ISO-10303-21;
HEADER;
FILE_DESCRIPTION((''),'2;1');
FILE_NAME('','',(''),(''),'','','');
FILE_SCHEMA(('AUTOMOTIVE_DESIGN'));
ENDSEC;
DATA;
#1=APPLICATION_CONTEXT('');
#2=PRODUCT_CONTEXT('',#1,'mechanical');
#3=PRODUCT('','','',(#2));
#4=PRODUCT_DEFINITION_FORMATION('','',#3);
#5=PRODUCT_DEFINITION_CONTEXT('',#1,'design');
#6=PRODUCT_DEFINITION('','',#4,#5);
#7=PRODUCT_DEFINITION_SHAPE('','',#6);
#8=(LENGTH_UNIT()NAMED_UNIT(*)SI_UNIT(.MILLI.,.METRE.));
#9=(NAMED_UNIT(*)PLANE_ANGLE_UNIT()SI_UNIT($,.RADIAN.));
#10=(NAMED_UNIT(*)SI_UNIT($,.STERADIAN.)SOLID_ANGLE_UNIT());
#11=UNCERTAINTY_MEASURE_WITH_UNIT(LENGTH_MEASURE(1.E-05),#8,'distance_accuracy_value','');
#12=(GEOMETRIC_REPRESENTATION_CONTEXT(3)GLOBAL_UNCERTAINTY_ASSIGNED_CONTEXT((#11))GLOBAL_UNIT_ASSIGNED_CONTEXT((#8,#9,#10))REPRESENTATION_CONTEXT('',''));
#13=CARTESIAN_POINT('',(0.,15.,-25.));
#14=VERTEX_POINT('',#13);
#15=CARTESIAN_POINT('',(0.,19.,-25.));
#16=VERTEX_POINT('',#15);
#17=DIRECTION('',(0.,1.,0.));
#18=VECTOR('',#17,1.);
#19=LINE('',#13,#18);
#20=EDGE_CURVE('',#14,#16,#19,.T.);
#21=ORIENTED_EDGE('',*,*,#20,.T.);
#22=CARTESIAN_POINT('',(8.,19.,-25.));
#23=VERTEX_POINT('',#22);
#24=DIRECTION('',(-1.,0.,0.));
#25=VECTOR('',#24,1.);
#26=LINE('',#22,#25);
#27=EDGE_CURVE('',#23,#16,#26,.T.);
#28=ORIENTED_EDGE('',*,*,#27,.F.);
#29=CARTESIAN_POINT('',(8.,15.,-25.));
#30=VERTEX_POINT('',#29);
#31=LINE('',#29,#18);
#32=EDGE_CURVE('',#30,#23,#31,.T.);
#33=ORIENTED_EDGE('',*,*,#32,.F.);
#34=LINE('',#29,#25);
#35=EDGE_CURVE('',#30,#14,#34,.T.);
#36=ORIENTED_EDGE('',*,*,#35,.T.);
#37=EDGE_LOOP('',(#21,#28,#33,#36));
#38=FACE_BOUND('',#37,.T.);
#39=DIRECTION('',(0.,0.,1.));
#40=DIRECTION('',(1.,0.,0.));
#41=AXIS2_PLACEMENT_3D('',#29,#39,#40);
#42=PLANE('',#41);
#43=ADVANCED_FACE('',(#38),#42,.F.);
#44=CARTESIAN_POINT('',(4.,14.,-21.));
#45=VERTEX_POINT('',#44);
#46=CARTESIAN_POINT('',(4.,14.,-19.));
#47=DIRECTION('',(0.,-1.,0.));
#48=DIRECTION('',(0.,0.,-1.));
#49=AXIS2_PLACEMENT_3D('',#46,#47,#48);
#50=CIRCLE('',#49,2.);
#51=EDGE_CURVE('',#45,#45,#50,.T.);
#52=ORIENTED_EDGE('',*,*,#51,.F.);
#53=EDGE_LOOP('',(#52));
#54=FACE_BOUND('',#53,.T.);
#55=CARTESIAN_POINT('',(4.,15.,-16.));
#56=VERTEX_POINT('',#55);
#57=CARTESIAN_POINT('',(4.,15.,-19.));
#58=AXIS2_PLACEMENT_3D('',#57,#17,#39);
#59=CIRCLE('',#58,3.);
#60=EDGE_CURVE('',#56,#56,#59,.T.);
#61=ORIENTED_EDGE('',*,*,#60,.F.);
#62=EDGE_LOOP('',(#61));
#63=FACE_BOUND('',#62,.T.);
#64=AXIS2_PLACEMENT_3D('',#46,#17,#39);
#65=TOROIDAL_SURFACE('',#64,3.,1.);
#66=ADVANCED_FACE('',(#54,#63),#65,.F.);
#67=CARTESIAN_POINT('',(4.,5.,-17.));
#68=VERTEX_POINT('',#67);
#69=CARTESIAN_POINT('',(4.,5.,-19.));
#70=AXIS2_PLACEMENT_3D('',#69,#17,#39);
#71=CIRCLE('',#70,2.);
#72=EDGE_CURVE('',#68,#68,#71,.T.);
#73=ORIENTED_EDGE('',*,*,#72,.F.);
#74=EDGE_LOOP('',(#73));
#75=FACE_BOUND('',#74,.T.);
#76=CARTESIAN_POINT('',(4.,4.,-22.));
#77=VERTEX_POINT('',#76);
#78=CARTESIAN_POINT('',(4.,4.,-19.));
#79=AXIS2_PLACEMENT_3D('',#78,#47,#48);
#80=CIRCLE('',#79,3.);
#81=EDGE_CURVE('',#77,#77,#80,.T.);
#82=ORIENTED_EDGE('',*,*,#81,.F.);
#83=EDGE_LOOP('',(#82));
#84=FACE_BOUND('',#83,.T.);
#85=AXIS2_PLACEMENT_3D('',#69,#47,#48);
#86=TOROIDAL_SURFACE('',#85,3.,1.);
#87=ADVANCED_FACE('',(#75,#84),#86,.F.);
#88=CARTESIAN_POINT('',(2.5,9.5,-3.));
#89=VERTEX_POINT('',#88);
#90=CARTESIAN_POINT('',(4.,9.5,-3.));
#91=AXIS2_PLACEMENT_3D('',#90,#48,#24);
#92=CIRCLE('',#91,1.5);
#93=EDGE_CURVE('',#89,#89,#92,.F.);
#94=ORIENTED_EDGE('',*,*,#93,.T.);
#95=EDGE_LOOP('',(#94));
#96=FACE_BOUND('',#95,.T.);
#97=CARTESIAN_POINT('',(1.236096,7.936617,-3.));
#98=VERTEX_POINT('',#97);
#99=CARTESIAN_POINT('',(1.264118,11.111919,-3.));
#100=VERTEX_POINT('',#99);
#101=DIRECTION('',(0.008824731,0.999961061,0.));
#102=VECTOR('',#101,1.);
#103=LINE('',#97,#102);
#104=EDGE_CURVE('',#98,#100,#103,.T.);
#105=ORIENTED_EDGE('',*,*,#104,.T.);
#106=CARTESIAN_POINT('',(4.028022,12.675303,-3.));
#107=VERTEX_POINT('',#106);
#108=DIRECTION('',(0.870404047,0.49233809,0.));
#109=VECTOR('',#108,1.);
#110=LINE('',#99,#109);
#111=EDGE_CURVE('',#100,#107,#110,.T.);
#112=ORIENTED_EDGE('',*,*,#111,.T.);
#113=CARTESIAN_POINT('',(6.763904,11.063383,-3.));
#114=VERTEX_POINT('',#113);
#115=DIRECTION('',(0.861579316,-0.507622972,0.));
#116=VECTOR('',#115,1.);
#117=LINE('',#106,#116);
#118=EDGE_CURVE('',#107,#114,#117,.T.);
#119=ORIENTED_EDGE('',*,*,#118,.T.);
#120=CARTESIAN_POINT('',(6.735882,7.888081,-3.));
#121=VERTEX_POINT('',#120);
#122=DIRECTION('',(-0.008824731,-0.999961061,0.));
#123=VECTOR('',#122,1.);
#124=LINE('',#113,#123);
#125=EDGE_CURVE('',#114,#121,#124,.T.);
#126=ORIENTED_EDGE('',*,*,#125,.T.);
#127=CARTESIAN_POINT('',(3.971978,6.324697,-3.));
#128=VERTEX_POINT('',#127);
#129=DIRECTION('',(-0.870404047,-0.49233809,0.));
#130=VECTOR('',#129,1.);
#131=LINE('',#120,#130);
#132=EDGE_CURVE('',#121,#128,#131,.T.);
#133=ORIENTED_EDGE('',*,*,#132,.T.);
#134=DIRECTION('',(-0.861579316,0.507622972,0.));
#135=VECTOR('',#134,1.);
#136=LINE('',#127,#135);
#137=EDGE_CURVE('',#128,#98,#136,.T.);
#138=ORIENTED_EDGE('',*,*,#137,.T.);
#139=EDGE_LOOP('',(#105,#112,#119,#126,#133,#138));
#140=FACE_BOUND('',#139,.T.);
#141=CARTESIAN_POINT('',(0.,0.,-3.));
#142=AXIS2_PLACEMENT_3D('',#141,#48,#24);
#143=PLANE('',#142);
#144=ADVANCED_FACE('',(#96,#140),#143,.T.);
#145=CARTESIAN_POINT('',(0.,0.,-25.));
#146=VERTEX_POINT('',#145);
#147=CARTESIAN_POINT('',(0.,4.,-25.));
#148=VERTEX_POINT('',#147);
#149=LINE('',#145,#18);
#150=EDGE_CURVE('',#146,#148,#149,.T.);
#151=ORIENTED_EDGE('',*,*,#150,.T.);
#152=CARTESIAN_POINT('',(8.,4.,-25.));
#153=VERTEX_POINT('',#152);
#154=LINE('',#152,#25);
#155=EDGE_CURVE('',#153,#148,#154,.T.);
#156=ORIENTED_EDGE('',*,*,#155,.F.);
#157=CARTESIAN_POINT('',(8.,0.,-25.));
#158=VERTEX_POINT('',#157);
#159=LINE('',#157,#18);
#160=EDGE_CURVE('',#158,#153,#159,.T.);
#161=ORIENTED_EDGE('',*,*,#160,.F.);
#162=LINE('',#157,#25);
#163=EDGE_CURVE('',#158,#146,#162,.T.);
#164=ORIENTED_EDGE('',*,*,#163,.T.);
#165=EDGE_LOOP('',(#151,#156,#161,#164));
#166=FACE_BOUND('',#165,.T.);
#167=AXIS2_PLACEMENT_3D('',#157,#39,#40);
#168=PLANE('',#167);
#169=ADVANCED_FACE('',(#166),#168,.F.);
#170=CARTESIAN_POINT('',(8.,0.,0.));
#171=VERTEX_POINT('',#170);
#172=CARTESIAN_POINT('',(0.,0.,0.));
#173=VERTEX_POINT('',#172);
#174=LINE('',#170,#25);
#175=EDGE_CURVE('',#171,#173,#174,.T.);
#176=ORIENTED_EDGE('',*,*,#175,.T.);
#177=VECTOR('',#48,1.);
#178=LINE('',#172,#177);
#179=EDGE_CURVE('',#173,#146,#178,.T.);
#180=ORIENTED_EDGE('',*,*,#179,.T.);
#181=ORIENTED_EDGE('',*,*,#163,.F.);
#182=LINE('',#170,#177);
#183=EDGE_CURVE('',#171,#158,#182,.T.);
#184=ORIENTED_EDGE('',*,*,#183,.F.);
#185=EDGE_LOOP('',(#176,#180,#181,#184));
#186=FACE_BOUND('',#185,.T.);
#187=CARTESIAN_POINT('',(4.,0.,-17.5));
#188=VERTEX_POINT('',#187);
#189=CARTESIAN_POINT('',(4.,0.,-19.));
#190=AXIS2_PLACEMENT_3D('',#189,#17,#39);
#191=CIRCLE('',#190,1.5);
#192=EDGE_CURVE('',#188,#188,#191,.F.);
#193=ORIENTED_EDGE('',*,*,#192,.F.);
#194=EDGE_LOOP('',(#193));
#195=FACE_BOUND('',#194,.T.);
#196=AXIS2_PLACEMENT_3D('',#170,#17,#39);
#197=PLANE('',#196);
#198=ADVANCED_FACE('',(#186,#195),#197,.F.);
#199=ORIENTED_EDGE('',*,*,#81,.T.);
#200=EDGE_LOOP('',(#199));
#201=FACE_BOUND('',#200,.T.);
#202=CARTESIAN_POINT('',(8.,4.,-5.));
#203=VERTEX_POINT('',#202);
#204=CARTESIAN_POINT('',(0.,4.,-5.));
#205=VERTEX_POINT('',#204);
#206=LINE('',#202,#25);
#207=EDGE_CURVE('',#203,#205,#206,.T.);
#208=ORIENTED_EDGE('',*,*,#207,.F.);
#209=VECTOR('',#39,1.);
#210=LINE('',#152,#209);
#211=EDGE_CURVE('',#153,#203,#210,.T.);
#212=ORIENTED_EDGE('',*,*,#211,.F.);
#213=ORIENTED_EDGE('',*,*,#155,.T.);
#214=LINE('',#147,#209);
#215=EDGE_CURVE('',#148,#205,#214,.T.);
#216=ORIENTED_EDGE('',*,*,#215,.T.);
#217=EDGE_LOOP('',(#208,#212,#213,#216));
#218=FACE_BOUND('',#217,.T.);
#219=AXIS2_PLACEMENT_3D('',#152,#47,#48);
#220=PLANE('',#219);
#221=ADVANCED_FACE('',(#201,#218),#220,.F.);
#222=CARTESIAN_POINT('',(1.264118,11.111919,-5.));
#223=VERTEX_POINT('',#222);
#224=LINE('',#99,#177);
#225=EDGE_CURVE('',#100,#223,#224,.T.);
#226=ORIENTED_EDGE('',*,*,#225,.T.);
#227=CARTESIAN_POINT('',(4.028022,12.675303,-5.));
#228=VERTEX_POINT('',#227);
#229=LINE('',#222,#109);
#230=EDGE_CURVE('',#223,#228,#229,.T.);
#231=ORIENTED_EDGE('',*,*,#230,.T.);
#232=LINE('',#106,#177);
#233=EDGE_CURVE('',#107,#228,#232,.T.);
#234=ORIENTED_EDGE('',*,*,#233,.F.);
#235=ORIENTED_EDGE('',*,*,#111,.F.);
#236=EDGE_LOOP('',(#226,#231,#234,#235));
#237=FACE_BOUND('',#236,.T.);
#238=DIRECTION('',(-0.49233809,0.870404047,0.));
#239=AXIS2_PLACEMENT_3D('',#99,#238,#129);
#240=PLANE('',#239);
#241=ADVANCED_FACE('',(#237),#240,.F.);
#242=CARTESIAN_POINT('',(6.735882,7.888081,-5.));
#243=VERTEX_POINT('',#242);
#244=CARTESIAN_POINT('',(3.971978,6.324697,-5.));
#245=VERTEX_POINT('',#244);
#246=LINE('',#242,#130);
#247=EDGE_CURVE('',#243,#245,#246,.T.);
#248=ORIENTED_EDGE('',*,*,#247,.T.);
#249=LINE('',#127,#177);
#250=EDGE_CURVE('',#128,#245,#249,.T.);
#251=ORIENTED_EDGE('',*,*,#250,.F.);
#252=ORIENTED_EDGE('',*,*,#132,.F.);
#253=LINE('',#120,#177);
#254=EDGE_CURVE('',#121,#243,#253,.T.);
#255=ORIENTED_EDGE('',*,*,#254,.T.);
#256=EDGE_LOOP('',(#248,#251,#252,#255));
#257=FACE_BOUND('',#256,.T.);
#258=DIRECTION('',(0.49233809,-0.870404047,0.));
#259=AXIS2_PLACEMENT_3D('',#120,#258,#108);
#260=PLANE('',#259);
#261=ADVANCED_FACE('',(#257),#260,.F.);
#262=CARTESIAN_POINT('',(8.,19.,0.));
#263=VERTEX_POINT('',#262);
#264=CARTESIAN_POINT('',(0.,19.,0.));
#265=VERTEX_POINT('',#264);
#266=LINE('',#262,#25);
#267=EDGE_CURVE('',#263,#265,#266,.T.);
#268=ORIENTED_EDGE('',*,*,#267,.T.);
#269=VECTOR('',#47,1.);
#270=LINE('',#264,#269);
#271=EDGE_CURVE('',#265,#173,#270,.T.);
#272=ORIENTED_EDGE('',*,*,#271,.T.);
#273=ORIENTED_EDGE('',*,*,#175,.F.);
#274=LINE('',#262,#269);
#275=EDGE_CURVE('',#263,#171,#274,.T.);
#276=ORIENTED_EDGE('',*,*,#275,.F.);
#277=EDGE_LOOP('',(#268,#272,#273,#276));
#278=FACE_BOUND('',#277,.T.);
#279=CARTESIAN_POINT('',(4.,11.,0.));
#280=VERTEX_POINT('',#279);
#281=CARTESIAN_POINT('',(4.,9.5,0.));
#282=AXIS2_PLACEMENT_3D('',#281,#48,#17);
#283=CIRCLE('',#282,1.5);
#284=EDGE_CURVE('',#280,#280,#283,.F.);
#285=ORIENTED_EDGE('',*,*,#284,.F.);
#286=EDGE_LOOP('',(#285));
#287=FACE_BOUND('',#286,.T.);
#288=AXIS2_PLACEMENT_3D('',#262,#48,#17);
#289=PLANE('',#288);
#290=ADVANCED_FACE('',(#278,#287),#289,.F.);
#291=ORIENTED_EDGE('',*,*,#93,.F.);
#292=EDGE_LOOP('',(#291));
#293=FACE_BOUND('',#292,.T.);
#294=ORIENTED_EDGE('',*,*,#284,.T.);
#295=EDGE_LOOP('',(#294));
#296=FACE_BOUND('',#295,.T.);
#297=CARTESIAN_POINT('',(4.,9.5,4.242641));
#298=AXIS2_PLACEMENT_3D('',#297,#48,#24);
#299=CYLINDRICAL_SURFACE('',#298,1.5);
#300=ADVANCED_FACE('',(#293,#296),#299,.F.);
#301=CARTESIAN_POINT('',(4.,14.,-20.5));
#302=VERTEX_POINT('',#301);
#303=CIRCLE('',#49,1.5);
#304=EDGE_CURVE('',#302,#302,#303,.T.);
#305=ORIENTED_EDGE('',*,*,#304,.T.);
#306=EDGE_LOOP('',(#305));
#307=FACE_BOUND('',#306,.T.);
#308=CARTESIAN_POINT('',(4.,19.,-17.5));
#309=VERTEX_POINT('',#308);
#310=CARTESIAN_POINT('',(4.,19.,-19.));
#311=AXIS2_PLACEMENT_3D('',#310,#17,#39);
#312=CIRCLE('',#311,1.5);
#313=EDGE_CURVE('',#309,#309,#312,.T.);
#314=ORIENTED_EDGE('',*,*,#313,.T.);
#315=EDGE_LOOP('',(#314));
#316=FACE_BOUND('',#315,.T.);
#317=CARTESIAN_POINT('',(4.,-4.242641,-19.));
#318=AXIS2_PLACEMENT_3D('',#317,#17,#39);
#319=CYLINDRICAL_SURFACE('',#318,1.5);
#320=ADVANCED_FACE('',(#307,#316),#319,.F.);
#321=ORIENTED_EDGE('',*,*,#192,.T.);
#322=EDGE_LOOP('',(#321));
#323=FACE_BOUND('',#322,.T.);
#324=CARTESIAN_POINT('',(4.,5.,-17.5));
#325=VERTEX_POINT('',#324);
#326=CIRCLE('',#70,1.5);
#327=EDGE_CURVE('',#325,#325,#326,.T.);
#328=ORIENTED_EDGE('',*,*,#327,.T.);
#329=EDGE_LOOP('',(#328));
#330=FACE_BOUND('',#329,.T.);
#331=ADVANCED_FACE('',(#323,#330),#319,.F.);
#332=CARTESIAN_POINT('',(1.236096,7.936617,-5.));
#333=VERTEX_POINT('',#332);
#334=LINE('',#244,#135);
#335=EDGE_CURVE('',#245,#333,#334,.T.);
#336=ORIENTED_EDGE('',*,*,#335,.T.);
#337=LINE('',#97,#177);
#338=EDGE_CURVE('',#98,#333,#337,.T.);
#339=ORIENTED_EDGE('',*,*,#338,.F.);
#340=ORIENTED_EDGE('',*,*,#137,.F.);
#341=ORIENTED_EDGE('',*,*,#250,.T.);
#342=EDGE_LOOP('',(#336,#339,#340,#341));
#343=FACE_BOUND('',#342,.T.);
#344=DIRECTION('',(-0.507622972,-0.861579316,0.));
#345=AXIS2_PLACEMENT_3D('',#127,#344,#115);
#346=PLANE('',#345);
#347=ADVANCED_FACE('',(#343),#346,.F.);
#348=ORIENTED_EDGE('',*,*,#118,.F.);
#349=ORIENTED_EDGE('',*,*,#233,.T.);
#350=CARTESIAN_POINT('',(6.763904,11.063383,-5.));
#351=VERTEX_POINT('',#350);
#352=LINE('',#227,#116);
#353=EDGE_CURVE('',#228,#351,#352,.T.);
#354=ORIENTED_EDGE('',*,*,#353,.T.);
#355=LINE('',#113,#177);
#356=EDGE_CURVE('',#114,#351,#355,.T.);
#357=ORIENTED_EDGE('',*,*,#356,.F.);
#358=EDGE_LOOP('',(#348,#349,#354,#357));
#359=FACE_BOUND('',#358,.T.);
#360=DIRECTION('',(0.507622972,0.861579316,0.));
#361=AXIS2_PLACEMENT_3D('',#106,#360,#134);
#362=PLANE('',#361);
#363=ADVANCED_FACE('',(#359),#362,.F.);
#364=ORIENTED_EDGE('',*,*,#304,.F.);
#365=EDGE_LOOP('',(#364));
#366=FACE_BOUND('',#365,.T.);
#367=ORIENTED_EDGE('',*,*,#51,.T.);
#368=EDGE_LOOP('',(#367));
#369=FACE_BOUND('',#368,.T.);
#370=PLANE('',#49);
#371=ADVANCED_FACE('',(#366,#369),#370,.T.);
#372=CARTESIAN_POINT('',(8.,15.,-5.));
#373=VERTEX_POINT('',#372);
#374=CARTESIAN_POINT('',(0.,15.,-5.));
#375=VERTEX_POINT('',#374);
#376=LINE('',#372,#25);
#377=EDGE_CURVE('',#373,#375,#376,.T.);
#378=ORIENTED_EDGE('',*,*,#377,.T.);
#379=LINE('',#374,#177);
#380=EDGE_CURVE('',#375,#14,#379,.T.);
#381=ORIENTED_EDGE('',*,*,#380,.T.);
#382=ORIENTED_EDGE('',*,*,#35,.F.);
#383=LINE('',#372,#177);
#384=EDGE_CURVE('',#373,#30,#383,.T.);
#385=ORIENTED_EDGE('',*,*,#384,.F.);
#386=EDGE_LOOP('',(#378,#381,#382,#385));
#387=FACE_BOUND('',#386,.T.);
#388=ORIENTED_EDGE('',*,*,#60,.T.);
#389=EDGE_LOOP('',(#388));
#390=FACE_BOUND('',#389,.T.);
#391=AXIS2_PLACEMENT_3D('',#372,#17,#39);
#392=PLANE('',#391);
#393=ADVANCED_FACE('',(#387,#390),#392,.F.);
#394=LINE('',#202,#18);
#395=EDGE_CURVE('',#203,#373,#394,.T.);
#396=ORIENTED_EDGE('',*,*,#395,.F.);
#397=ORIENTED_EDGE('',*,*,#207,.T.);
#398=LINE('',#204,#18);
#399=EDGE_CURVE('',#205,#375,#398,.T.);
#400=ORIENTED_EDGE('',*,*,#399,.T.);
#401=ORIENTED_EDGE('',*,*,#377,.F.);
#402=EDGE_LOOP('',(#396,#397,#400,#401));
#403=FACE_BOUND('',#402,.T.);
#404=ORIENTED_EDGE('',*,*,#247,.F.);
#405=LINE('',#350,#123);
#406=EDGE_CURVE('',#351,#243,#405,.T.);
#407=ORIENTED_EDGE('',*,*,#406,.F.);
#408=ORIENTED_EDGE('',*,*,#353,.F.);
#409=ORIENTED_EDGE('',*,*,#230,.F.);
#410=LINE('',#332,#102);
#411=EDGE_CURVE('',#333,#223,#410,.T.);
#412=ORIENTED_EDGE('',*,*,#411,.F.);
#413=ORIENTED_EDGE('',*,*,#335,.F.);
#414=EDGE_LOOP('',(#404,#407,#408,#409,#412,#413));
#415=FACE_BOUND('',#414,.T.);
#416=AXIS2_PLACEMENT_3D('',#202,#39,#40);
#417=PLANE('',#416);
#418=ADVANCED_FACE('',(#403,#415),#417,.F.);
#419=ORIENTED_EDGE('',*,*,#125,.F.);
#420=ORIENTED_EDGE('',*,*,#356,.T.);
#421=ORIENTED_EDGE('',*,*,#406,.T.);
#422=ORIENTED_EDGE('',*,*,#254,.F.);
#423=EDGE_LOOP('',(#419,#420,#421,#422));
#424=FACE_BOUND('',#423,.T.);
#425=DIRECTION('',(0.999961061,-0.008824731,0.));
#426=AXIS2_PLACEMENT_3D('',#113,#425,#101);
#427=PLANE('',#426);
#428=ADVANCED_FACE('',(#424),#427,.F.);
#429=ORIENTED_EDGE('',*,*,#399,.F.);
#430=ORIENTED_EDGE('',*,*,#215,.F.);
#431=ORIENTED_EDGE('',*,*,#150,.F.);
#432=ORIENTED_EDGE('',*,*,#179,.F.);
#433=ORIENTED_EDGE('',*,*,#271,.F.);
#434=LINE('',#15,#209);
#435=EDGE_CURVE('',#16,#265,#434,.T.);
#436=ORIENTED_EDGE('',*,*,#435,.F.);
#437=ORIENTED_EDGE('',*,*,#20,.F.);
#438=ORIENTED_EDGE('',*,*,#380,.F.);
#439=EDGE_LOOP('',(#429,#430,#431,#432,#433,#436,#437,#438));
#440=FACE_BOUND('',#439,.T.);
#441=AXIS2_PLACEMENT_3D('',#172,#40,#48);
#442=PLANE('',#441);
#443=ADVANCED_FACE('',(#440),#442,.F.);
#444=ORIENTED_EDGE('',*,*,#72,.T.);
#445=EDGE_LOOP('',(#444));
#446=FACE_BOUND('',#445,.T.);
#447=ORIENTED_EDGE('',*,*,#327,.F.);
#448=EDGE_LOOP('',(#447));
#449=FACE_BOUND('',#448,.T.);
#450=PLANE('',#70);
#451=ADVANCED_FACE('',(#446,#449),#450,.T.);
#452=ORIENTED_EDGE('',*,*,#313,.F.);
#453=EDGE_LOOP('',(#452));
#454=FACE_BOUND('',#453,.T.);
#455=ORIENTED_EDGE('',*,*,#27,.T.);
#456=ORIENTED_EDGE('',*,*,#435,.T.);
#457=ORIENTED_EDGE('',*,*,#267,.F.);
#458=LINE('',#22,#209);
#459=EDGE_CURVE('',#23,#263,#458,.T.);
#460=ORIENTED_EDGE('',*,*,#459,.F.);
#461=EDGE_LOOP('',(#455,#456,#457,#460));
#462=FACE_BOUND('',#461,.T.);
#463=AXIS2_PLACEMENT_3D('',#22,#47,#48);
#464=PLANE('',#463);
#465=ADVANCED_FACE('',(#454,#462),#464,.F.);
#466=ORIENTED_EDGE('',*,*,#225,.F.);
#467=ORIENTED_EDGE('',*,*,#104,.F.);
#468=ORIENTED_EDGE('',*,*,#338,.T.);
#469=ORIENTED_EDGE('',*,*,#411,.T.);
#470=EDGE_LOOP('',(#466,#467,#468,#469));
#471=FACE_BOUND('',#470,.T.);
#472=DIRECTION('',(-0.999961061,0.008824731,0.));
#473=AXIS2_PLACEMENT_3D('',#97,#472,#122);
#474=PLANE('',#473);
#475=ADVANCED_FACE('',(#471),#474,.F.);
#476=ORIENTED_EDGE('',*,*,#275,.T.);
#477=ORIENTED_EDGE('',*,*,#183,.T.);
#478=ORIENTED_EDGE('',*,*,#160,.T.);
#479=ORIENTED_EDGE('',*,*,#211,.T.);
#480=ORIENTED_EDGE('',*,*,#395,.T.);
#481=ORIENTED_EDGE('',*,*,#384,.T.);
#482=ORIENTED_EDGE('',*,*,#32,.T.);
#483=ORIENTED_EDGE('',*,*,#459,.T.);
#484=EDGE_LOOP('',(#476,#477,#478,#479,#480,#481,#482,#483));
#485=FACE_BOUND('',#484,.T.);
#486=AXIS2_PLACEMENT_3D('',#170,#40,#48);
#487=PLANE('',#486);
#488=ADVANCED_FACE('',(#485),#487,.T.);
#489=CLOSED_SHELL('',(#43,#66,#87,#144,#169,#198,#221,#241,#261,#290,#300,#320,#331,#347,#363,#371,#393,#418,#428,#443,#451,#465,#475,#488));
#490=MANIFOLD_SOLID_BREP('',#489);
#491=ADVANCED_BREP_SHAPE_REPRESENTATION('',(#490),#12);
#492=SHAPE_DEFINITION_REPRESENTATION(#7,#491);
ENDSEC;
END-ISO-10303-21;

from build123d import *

# Parameters (mm, degrees)
EXTRUDE_1_DEPTH     = 8
CUT_EXTRUDE_1_REACH = 34.404
SKETCH_4_R          = 1.5
EXTRUDE_START       = 1
SKETCH_5_R          = 2
SKETCH_5_R_2        = 1.5
EXTRUDE_2_DEPTH     = 1
SKETCH_6_R          = 2
SKETCH_6_R_2        = 1.5
EXTRUDE_3_DEPTH     = 1
FILLET_1_R          = 1
FILLET_2_R          = 1
SKETCH_7_R          = 1.5
CUT_EXTRUDE_2_DEPTH = 5
CUT_EXTRUDE_3_DEPTH = 2


with BuildPart() as part:
    # Эскиз3 → Бобышка-Вытянуть1 (new body)
    with BuildSketch(Plane(origin=(0, 0, 0), x_dir=(0, 0, -1), z_dir=(1, 0, 0))):
        Polygon((0, 0), (25, 0), (25, 4), (5, 4), (5, 15), (25, 15), (25, 19), (0, 19), align=None)
    extrude(amount=EXTRUDE_1_DEPTH)

    # Вырез-Вытянуть1: up to this face of the body (flat: up to its plane)
    cut_extrude_1_end = Plane(part.part.faces().sort_by_distance((4, 0, -12.5))[0])
    # Эскиз4 → Вырез-Вытянуть1 (cut, up to the picked face)
    with BuildSketch(Plane(origin=(0, 19, 0), x_dir=(1, 0, 0), z_dir=(0, 1, 0)), mode=Mode.PRIVATE) as cut_extrude_1_sk1:
        with Locations(Location((4, 19, 0), (0, 0, 270))):
            Circle(SKETCH_4_R)
    cut_extrude_1_tool1 = split(extrude(cut_extrude_1_sk1.sketch, amount=-CUT_EXTRUDE_1_REACH, mode=Mode.PRIVATE), bisect_by=cut_extrude_1_end, keep=Keep.BOTH, mode=Mode.PRIVATE)
    add(cut_extrude_1_tool1.solids().sort_by(Axis((4, 19, -19), (0, -1, 0)))[0], mode=Mode.SUBTRACT)

    # Эскиз5 → Бобышка-Вытянуть2 (add)
    with BuildSketch(Plane(origin=(0, 4, 0), x_dir=(1, 0, 0), z_dir=(0, 1, 0)).offset(EXTRUDE_START)):
        with Locations(Location((4, 19, 0), (0, 0, 90))):
            Circle(SKETCH_5_R)
        with Locations(Location((4, 19, 0), (0, 0, 270))):
            Circle(SKETCH_5_R_2, mode=Mode.SUBTRACT)
    extrude(amount=-EXTRUDE_2_DEPTH)

    # Эскиз6 → Бобышка-Вытянуть3 (add)
    with BuildSketch(Plane(origin=(0, 15, 0), x_dir=(-1, 0, 0), z_dir=(0, -1, 0))):
        with Locations(Location((-4, 19, 0), (0, 0, 90))):
            Circle(SKETCH_6_R)
        with Locations(Location((-4, 19, 0), (0, 0, 270))):
            Circle(SKETCH_6_R_2, mode=Mode.SUBTRACT)
    extrude(amount=EXTRUDE_3_DEPTH)

    # Скругление1
    fillet_1_edges = [part.edges().sort_by_distance(p)[0] for p in [
        (4, 4, -17),
    ]]
    fillet(fillet_1_edges, radius=FILLET_1_R - 0.0001)  # a hair under: the kernel refuses the full size

    # Скругление2
    fillet_2_edges = [part.edges().sort_by_distance(p)[0] for p in [
        (4, 15, -17),
    ]]
    fillet(fillet_2_edges, radius=FILLET_2_R - 0.0001)  # a hair under: the kernel refuses the full size

    # Эскиз7 → Вырез-Вытянуть2 (cut)
    with BuildSketch(Plane(origin=(0, 0, -5), x_dir=(-1, 0, 0), z_dir=(0, 0, -1))):
        with Locations((-4, 9.5)):
            Circle(SKETCH_7_R)
    extrude(amount=-CUT_EXTRUDE_2_DEPTH, mode=Mode.SUBTRACT)

    # Эскиз9 → Вырез-Вытянуть3 (cut)
    with BuildSketch(Plane(origin=(0, 0, -5), x_dir=(-1, 0, 0), z_dir=(0, 0, -1))):
        Polygon((-1.264118223, 11.111919426), (-4.028022284, 12.675302834), (-6.763904061, 11.063383407), (-6.735881777, 7.888080574), (-3.971977716, 6.324697166), (-1.236095939, 7.936616593), align=None)
    extrude(amount=-CUT_EXTRUDE_3_DEPTH, mode=Mode.SUBTRACT)


solid = part.part
